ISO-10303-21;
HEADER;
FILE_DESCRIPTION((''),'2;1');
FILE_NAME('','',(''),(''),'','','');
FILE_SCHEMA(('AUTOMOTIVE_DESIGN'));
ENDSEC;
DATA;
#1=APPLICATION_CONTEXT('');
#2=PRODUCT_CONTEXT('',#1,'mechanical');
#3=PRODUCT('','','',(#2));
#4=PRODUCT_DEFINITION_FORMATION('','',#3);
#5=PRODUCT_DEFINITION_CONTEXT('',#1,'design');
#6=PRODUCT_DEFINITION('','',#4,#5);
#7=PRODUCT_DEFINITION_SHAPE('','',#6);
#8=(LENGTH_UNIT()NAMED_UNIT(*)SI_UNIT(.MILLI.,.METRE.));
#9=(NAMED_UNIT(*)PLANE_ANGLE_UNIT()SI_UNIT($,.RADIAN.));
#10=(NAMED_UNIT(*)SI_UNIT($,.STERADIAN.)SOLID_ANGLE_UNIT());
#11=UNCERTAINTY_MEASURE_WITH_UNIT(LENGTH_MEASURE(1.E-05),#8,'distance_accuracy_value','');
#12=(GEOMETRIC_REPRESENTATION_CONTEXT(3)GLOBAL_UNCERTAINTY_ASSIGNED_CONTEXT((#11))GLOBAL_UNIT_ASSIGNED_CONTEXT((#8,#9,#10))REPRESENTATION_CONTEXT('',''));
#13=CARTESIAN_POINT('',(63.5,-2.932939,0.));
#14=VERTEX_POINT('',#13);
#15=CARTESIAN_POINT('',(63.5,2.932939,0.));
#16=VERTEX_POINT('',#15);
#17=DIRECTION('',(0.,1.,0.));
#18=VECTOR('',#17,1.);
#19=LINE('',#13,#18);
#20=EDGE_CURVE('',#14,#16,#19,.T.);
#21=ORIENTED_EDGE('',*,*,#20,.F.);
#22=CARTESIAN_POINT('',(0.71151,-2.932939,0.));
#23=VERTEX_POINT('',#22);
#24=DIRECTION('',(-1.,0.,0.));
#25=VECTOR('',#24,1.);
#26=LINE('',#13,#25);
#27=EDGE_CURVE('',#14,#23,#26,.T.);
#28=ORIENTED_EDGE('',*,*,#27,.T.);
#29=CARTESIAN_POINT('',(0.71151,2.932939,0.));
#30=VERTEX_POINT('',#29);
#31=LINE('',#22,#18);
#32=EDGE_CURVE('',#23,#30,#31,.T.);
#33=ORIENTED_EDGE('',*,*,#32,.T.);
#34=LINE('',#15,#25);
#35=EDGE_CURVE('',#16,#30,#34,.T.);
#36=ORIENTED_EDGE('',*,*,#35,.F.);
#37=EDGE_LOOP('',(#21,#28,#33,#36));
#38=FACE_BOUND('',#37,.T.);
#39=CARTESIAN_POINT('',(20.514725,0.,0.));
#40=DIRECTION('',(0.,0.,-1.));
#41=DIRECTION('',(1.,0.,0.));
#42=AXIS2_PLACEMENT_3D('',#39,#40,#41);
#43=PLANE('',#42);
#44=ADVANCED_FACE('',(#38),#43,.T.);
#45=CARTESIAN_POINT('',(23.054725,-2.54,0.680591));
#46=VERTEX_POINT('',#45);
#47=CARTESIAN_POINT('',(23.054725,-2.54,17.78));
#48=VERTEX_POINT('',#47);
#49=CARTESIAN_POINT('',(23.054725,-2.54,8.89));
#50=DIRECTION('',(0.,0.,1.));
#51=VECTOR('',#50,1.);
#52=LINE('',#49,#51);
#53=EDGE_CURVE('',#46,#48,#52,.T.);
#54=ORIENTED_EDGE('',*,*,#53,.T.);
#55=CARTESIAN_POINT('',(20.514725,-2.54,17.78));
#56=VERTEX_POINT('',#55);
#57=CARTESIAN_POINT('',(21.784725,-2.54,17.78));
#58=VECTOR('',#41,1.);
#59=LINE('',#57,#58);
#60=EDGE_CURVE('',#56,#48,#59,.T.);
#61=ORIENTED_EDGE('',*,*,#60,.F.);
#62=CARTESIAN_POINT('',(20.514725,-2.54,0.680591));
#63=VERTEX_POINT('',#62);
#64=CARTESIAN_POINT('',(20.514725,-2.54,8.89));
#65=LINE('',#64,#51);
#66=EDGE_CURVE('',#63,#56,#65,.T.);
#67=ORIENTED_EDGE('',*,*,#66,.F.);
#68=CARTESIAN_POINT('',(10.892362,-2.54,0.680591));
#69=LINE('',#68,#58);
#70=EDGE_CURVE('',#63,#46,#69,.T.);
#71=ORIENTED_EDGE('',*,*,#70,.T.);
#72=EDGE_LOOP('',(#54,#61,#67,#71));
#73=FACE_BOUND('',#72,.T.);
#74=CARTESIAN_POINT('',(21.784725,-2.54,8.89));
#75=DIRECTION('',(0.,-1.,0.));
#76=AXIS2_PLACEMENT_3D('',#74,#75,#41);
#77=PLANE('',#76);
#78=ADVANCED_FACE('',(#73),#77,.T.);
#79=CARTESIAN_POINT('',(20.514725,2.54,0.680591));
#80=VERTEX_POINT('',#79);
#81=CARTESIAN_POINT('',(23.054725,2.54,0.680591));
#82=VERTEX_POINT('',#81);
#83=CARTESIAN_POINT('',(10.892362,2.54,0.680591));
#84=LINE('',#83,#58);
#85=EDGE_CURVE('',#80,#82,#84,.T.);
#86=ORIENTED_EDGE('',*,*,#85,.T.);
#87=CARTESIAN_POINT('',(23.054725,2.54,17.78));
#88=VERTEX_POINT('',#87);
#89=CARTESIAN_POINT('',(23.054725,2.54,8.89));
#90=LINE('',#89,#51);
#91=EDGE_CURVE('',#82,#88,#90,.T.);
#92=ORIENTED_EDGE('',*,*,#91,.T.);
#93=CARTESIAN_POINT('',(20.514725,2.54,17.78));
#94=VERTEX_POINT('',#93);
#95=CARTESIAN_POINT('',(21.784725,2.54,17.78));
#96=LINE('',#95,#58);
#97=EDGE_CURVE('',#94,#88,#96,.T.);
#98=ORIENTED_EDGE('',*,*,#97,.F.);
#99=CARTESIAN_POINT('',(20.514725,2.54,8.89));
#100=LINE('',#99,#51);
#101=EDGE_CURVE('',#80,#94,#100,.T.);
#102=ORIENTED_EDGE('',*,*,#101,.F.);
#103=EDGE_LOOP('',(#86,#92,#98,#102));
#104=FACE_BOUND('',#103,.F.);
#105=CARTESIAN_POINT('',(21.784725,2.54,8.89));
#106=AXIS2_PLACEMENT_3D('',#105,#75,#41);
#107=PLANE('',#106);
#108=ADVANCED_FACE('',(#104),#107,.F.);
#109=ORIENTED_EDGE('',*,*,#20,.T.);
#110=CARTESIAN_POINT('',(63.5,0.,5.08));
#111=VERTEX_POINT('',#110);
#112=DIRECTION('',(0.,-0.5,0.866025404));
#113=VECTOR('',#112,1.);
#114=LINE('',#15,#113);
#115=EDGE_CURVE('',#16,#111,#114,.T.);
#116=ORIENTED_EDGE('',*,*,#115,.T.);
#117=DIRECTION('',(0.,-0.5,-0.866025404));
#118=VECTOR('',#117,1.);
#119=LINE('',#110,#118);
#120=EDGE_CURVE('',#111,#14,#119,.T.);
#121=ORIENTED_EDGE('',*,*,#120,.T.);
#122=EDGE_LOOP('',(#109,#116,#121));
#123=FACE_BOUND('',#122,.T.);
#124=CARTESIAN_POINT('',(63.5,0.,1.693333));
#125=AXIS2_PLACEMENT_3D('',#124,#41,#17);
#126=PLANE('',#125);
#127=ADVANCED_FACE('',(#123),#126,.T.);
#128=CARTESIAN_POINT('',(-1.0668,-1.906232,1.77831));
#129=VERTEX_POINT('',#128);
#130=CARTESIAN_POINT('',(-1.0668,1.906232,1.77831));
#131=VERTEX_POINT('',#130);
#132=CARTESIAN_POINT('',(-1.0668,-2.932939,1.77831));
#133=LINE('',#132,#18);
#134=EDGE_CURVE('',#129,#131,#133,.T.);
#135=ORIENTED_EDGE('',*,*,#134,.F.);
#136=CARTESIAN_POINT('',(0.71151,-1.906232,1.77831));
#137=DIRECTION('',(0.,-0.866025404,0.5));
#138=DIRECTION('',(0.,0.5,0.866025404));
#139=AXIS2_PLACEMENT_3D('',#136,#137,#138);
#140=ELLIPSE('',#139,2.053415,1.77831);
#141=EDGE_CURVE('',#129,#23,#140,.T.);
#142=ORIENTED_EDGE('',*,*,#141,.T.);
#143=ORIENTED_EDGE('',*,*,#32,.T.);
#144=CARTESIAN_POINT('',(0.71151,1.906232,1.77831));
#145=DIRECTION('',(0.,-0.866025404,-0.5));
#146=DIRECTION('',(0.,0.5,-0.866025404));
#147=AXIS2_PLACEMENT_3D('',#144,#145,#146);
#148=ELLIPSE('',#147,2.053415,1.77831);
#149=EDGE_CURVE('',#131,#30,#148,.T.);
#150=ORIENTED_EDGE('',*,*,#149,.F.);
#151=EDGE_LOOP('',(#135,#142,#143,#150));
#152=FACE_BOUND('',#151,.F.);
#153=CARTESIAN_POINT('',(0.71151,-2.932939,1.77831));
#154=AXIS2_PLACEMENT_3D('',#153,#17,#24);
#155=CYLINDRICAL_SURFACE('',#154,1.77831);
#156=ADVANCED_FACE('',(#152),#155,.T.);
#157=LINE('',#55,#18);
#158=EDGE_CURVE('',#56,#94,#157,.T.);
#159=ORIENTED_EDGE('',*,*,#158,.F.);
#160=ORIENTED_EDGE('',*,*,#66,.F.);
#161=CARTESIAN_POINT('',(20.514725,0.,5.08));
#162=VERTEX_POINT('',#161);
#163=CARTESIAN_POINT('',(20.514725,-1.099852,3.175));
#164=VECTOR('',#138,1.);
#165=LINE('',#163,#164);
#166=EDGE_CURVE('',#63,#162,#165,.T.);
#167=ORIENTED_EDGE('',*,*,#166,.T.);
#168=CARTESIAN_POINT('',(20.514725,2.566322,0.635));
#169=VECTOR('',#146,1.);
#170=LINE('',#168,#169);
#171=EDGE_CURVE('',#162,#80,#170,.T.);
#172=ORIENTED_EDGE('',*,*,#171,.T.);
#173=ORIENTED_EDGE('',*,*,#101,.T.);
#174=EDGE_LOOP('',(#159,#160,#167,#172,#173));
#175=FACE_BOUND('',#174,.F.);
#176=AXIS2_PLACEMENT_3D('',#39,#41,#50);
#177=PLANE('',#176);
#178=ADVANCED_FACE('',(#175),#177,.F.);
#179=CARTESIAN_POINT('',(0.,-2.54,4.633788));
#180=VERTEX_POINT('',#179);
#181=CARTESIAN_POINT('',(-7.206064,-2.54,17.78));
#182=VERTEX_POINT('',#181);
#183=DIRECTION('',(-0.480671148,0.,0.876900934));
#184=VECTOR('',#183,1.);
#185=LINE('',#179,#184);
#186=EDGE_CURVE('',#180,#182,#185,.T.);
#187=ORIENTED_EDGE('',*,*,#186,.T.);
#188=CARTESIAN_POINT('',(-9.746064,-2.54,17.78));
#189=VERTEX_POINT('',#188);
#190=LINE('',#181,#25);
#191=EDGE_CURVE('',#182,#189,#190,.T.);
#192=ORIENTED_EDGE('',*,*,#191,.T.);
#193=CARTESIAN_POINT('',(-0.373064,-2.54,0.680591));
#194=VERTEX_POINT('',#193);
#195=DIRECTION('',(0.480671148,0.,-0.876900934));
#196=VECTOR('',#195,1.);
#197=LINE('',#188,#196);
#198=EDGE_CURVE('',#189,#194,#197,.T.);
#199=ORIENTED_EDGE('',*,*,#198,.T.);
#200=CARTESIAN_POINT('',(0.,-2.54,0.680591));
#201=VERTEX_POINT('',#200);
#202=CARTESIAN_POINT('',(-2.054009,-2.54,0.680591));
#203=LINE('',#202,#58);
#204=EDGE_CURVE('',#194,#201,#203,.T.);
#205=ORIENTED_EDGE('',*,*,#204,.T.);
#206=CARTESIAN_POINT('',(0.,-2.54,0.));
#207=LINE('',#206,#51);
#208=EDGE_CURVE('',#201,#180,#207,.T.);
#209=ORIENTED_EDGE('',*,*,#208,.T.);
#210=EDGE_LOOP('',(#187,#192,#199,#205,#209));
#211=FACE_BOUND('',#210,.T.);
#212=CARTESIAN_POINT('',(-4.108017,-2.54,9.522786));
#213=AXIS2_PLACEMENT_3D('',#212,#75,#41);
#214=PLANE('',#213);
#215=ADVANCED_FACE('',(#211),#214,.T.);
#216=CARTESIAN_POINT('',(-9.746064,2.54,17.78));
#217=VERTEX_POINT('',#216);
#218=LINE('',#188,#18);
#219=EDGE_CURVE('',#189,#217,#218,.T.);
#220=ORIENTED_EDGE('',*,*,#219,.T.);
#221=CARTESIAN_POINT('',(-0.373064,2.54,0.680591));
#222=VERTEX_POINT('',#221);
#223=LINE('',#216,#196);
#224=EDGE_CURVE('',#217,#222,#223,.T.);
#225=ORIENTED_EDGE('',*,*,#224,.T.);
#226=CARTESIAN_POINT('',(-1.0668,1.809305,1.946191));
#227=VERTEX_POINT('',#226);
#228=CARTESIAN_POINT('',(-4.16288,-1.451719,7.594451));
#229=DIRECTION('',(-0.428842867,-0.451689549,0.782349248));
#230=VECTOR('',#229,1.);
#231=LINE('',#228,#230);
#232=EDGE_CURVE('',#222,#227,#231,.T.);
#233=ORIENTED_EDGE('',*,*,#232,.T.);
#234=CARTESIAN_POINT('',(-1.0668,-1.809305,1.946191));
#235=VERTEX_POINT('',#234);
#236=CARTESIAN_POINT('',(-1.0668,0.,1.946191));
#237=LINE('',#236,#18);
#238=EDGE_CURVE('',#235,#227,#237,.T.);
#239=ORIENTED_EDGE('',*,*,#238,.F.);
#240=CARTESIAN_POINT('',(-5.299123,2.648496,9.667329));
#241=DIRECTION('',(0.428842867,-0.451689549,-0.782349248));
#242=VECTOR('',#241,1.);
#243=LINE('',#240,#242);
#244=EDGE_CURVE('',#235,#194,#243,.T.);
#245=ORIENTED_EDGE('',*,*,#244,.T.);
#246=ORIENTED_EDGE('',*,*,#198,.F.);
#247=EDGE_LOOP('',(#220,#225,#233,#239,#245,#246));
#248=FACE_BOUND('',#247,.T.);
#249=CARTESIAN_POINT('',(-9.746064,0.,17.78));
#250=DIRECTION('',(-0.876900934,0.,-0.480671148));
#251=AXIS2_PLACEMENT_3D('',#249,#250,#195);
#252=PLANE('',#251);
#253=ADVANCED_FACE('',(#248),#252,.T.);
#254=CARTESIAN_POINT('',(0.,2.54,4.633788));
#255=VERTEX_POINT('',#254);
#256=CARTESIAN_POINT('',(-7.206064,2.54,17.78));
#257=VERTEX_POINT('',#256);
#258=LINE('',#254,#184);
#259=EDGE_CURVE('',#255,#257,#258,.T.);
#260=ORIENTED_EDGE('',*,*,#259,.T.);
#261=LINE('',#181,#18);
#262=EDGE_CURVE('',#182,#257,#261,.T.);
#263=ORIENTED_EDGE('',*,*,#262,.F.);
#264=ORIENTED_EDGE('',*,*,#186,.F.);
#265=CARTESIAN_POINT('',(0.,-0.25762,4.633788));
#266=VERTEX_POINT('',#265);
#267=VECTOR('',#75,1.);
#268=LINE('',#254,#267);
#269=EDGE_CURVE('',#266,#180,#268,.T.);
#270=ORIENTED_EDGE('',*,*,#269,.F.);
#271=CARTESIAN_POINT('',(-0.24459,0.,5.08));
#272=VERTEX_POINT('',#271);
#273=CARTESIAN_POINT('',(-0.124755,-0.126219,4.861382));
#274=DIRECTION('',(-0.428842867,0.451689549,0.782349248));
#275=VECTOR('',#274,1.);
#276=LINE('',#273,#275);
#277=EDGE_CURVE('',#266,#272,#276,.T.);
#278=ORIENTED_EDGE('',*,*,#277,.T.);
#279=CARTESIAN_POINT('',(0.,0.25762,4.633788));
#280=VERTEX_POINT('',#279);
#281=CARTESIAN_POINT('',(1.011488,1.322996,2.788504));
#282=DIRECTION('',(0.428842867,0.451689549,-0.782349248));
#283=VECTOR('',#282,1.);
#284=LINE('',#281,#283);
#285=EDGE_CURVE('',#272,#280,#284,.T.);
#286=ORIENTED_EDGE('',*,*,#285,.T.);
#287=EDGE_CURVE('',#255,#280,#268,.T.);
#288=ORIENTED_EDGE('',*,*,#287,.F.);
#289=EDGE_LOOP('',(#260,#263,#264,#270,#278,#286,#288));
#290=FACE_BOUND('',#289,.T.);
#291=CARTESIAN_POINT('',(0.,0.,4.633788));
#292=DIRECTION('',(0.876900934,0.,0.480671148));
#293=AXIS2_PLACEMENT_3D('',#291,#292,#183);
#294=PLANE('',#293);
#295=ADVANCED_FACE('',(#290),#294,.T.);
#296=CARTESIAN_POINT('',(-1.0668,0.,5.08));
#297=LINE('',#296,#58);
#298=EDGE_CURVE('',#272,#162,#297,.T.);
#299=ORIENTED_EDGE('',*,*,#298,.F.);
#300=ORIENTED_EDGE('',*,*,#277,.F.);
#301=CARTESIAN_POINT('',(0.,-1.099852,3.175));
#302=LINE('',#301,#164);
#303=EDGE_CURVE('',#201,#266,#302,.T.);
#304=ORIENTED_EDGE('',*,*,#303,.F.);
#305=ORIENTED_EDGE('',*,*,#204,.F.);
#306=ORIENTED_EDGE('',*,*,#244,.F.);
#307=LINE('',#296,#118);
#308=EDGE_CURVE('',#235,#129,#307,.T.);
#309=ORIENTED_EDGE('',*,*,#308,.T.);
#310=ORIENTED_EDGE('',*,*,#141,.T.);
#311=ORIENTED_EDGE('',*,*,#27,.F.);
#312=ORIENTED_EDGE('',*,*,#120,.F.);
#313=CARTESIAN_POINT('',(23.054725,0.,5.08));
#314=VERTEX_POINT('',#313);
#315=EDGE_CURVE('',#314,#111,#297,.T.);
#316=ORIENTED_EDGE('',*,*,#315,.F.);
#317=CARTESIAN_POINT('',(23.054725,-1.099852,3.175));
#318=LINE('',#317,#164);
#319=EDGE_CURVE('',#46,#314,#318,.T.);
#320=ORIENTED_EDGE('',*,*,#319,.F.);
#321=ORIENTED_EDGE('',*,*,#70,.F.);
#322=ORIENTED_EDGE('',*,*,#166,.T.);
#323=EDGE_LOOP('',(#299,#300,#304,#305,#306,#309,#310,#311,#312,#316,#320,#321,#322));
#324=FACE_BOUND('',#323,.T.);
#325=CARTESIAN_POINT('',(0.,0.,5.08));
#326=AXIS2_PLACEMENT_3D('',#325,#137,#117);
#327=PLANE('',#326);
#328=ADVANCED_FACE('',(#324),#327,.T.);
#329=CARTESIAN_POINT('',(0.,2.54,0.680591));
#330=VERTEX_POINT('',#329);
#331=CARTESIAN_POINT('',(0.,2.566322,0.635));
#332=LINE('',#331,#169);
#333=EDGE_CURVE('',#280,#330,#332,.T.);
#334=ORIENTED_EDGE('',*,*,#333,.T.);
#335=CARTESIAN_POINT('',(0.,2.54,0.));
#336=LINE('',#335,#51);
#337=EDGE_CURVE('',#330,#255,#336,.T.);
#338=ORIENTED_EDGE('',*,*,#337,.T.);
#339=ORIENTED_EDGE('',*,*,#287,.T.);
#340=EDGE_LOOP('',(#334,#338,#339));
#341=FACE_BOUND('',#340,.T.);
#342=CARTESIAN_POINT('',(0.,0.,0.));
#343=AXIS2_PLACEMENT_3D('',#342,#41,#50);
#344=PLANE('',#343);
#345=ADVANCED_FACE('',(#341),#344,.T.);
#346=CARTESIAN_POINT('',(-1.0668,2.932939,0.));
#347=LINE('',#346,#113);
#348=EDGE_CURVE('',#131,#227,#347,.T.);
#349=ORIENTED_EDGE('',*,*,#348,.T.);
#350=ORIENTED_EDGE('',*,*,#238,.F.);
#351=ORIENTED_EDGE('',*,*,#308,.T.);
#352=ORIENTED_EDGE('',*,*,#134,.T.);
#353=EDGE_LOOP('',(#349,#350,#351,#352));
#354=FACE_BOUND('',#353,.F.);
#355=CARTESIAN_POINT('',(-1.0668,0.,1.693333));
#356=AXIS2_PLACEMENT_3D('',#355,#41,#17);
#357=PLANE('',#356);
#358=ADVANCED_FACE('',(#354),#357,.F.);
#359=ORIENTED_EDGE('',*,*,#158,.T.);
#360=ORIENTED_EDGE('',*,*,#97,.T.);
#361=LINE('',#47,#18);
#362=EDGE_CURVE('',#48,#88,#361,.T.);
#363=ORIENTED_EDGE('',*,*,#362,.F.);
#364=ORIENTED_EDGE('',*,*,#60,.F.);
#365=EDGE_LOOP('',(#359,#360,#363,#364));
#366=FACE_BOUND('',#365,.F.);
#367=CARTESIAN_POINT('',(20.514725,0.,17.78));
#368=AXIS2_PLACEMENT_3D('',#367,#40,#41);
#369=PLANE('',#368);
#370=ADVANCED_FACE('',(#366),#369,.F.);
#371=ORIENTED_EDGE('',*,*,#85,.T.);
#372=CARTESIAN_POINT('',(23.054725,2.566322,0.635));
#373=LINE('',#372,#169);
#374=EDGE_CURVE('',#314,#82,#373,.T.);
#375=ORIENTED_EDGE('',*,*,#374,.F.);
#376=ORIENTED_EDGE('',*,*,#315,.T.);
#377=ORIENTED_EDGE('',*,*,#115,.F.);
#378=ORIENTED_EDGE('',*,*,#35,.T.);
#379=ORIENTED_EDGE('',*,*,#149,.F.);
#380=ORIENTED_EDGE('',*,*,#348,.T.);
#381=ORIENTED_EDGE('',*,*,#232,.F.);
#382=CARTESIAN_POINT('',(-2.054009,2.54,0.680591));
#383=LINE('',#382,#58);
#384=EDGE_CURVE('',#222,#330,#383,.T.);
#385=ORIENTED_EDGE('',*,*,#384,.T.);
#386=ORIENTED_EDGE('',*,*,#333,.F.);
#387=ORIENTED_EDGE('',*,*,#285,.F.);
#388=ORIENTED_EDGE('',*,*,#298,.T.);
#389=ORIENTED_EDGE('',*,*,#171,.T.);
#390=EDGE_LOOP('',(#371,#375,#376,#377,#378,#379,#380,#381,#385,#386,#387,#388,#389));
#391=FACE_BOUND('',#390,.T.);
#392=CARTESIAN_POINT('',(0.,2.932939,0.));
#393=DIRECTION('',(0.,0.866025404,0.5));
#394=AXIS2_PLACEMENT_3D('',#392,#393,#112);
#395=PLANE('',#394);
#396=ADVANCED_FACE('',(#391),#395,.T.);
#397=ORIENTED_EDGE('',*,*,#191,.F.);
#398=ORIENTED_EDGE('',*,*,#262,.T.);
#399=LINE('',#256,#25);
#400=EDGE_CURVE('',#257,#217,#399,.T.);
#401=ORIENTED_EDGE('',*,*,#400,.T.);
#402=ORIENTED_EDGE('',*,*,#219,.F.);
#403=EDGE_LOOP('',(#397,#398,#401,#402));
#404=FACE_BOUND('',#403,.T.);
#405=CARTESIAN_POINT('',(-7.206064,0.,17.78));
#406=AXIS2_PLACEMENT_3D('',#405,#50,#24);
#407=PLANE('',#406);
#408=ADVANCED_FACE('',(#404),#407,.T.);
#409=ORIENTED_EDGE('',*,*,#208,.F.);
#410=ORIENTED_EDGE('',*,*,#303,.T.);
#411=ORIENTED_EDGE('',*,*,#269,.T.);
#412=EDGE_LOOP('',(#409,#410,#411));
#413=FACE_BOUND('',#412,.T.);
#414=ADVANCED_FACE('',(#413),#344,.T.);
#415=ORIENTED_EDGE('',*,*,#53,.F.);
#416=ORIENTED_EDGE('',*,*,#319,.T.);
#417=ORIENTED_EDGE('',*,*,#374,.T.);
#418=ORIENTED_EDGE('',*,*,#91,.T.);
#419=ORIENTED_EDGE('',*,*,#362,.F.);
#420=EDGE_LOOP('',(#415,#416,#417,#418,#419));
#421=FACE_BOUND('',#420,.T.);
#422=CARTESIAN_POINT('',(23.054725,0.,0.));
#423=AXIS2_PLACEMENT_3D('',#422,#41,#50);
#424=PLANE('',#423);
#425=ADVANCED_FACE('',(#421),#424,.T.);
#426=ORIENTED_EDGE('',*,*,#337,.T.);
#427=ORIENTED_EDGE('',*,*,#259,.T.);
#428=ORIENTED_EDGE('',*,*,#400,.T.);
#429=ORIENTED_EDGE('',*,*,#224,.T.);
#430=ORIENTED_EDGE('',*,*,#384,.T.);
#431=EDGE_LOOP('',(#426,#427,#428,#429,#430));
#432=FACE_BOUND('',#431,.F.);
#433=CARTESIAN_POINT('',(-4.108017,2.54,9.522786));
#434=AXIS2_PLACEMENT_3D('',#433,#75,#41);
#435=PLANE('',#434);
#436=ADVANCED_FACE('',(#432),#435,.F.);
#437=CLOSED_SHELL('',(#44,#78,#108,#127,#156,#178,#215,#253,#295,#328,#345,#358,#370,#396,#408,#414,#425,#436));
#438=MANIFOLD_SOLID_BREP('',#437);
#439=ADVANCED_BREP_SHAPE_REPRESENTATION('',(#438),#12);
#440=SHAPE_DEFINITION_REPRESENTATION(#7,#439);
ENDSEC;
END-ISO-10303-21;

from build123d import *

# Parameters (mm, degrees)
F1_DEPTH      = 63.5
F1_DEPTH_BACK = 1.0668
F2_W          = 2.54
F2_H          = 17.78
F3_DEPTH      = 2.54
F4_DEPTH      = 2.54
F5_R          = 1.77830971


# Not quite as in the source:
# - a feature names something its author has since deleted; it is built from what else it names


with BuildPart() as f1:
    # F0 (on Right) → F1 (new body, two sides)
    with BuildSketch(Plane.YZ) as f1_sk:
        Polygon((2.9329393675, 0), (0, 5.08), (-2.9329393675, 0), align=None)
    extrude(amount=F1_DEPTH)
    extrude(f1_sk.sketch, amount=-F1_DEPTH_BACK)

    # F2 (on Front) → F3 (join, symmetric)
    with BuildSketch(Plane.XZ):
        with Locations((21.7847247761, 8.89)):
            Rectangle(F2_W, F2_H)
    extrude(amount=F3_DEPTH, both=True)

    # F2 (on Front) → F4 (join, symmetric)
    with BuildSketch(Plane.XZ):
        Polygon((-9.746064432, 17.78), (0, 0), (0, 4.6337883681), (-7.206064432, 17.78), align=None)
    extrude(amount=F4_DEPTH, both=True)

    # F5
    f5_edges = [f1.edges().sort_by_distance(p)[0] for p in [
        (-1.0668, 0, 0),
    ]]
    fillet(f5_edges, radius=F5_R)


solid = f1.part
